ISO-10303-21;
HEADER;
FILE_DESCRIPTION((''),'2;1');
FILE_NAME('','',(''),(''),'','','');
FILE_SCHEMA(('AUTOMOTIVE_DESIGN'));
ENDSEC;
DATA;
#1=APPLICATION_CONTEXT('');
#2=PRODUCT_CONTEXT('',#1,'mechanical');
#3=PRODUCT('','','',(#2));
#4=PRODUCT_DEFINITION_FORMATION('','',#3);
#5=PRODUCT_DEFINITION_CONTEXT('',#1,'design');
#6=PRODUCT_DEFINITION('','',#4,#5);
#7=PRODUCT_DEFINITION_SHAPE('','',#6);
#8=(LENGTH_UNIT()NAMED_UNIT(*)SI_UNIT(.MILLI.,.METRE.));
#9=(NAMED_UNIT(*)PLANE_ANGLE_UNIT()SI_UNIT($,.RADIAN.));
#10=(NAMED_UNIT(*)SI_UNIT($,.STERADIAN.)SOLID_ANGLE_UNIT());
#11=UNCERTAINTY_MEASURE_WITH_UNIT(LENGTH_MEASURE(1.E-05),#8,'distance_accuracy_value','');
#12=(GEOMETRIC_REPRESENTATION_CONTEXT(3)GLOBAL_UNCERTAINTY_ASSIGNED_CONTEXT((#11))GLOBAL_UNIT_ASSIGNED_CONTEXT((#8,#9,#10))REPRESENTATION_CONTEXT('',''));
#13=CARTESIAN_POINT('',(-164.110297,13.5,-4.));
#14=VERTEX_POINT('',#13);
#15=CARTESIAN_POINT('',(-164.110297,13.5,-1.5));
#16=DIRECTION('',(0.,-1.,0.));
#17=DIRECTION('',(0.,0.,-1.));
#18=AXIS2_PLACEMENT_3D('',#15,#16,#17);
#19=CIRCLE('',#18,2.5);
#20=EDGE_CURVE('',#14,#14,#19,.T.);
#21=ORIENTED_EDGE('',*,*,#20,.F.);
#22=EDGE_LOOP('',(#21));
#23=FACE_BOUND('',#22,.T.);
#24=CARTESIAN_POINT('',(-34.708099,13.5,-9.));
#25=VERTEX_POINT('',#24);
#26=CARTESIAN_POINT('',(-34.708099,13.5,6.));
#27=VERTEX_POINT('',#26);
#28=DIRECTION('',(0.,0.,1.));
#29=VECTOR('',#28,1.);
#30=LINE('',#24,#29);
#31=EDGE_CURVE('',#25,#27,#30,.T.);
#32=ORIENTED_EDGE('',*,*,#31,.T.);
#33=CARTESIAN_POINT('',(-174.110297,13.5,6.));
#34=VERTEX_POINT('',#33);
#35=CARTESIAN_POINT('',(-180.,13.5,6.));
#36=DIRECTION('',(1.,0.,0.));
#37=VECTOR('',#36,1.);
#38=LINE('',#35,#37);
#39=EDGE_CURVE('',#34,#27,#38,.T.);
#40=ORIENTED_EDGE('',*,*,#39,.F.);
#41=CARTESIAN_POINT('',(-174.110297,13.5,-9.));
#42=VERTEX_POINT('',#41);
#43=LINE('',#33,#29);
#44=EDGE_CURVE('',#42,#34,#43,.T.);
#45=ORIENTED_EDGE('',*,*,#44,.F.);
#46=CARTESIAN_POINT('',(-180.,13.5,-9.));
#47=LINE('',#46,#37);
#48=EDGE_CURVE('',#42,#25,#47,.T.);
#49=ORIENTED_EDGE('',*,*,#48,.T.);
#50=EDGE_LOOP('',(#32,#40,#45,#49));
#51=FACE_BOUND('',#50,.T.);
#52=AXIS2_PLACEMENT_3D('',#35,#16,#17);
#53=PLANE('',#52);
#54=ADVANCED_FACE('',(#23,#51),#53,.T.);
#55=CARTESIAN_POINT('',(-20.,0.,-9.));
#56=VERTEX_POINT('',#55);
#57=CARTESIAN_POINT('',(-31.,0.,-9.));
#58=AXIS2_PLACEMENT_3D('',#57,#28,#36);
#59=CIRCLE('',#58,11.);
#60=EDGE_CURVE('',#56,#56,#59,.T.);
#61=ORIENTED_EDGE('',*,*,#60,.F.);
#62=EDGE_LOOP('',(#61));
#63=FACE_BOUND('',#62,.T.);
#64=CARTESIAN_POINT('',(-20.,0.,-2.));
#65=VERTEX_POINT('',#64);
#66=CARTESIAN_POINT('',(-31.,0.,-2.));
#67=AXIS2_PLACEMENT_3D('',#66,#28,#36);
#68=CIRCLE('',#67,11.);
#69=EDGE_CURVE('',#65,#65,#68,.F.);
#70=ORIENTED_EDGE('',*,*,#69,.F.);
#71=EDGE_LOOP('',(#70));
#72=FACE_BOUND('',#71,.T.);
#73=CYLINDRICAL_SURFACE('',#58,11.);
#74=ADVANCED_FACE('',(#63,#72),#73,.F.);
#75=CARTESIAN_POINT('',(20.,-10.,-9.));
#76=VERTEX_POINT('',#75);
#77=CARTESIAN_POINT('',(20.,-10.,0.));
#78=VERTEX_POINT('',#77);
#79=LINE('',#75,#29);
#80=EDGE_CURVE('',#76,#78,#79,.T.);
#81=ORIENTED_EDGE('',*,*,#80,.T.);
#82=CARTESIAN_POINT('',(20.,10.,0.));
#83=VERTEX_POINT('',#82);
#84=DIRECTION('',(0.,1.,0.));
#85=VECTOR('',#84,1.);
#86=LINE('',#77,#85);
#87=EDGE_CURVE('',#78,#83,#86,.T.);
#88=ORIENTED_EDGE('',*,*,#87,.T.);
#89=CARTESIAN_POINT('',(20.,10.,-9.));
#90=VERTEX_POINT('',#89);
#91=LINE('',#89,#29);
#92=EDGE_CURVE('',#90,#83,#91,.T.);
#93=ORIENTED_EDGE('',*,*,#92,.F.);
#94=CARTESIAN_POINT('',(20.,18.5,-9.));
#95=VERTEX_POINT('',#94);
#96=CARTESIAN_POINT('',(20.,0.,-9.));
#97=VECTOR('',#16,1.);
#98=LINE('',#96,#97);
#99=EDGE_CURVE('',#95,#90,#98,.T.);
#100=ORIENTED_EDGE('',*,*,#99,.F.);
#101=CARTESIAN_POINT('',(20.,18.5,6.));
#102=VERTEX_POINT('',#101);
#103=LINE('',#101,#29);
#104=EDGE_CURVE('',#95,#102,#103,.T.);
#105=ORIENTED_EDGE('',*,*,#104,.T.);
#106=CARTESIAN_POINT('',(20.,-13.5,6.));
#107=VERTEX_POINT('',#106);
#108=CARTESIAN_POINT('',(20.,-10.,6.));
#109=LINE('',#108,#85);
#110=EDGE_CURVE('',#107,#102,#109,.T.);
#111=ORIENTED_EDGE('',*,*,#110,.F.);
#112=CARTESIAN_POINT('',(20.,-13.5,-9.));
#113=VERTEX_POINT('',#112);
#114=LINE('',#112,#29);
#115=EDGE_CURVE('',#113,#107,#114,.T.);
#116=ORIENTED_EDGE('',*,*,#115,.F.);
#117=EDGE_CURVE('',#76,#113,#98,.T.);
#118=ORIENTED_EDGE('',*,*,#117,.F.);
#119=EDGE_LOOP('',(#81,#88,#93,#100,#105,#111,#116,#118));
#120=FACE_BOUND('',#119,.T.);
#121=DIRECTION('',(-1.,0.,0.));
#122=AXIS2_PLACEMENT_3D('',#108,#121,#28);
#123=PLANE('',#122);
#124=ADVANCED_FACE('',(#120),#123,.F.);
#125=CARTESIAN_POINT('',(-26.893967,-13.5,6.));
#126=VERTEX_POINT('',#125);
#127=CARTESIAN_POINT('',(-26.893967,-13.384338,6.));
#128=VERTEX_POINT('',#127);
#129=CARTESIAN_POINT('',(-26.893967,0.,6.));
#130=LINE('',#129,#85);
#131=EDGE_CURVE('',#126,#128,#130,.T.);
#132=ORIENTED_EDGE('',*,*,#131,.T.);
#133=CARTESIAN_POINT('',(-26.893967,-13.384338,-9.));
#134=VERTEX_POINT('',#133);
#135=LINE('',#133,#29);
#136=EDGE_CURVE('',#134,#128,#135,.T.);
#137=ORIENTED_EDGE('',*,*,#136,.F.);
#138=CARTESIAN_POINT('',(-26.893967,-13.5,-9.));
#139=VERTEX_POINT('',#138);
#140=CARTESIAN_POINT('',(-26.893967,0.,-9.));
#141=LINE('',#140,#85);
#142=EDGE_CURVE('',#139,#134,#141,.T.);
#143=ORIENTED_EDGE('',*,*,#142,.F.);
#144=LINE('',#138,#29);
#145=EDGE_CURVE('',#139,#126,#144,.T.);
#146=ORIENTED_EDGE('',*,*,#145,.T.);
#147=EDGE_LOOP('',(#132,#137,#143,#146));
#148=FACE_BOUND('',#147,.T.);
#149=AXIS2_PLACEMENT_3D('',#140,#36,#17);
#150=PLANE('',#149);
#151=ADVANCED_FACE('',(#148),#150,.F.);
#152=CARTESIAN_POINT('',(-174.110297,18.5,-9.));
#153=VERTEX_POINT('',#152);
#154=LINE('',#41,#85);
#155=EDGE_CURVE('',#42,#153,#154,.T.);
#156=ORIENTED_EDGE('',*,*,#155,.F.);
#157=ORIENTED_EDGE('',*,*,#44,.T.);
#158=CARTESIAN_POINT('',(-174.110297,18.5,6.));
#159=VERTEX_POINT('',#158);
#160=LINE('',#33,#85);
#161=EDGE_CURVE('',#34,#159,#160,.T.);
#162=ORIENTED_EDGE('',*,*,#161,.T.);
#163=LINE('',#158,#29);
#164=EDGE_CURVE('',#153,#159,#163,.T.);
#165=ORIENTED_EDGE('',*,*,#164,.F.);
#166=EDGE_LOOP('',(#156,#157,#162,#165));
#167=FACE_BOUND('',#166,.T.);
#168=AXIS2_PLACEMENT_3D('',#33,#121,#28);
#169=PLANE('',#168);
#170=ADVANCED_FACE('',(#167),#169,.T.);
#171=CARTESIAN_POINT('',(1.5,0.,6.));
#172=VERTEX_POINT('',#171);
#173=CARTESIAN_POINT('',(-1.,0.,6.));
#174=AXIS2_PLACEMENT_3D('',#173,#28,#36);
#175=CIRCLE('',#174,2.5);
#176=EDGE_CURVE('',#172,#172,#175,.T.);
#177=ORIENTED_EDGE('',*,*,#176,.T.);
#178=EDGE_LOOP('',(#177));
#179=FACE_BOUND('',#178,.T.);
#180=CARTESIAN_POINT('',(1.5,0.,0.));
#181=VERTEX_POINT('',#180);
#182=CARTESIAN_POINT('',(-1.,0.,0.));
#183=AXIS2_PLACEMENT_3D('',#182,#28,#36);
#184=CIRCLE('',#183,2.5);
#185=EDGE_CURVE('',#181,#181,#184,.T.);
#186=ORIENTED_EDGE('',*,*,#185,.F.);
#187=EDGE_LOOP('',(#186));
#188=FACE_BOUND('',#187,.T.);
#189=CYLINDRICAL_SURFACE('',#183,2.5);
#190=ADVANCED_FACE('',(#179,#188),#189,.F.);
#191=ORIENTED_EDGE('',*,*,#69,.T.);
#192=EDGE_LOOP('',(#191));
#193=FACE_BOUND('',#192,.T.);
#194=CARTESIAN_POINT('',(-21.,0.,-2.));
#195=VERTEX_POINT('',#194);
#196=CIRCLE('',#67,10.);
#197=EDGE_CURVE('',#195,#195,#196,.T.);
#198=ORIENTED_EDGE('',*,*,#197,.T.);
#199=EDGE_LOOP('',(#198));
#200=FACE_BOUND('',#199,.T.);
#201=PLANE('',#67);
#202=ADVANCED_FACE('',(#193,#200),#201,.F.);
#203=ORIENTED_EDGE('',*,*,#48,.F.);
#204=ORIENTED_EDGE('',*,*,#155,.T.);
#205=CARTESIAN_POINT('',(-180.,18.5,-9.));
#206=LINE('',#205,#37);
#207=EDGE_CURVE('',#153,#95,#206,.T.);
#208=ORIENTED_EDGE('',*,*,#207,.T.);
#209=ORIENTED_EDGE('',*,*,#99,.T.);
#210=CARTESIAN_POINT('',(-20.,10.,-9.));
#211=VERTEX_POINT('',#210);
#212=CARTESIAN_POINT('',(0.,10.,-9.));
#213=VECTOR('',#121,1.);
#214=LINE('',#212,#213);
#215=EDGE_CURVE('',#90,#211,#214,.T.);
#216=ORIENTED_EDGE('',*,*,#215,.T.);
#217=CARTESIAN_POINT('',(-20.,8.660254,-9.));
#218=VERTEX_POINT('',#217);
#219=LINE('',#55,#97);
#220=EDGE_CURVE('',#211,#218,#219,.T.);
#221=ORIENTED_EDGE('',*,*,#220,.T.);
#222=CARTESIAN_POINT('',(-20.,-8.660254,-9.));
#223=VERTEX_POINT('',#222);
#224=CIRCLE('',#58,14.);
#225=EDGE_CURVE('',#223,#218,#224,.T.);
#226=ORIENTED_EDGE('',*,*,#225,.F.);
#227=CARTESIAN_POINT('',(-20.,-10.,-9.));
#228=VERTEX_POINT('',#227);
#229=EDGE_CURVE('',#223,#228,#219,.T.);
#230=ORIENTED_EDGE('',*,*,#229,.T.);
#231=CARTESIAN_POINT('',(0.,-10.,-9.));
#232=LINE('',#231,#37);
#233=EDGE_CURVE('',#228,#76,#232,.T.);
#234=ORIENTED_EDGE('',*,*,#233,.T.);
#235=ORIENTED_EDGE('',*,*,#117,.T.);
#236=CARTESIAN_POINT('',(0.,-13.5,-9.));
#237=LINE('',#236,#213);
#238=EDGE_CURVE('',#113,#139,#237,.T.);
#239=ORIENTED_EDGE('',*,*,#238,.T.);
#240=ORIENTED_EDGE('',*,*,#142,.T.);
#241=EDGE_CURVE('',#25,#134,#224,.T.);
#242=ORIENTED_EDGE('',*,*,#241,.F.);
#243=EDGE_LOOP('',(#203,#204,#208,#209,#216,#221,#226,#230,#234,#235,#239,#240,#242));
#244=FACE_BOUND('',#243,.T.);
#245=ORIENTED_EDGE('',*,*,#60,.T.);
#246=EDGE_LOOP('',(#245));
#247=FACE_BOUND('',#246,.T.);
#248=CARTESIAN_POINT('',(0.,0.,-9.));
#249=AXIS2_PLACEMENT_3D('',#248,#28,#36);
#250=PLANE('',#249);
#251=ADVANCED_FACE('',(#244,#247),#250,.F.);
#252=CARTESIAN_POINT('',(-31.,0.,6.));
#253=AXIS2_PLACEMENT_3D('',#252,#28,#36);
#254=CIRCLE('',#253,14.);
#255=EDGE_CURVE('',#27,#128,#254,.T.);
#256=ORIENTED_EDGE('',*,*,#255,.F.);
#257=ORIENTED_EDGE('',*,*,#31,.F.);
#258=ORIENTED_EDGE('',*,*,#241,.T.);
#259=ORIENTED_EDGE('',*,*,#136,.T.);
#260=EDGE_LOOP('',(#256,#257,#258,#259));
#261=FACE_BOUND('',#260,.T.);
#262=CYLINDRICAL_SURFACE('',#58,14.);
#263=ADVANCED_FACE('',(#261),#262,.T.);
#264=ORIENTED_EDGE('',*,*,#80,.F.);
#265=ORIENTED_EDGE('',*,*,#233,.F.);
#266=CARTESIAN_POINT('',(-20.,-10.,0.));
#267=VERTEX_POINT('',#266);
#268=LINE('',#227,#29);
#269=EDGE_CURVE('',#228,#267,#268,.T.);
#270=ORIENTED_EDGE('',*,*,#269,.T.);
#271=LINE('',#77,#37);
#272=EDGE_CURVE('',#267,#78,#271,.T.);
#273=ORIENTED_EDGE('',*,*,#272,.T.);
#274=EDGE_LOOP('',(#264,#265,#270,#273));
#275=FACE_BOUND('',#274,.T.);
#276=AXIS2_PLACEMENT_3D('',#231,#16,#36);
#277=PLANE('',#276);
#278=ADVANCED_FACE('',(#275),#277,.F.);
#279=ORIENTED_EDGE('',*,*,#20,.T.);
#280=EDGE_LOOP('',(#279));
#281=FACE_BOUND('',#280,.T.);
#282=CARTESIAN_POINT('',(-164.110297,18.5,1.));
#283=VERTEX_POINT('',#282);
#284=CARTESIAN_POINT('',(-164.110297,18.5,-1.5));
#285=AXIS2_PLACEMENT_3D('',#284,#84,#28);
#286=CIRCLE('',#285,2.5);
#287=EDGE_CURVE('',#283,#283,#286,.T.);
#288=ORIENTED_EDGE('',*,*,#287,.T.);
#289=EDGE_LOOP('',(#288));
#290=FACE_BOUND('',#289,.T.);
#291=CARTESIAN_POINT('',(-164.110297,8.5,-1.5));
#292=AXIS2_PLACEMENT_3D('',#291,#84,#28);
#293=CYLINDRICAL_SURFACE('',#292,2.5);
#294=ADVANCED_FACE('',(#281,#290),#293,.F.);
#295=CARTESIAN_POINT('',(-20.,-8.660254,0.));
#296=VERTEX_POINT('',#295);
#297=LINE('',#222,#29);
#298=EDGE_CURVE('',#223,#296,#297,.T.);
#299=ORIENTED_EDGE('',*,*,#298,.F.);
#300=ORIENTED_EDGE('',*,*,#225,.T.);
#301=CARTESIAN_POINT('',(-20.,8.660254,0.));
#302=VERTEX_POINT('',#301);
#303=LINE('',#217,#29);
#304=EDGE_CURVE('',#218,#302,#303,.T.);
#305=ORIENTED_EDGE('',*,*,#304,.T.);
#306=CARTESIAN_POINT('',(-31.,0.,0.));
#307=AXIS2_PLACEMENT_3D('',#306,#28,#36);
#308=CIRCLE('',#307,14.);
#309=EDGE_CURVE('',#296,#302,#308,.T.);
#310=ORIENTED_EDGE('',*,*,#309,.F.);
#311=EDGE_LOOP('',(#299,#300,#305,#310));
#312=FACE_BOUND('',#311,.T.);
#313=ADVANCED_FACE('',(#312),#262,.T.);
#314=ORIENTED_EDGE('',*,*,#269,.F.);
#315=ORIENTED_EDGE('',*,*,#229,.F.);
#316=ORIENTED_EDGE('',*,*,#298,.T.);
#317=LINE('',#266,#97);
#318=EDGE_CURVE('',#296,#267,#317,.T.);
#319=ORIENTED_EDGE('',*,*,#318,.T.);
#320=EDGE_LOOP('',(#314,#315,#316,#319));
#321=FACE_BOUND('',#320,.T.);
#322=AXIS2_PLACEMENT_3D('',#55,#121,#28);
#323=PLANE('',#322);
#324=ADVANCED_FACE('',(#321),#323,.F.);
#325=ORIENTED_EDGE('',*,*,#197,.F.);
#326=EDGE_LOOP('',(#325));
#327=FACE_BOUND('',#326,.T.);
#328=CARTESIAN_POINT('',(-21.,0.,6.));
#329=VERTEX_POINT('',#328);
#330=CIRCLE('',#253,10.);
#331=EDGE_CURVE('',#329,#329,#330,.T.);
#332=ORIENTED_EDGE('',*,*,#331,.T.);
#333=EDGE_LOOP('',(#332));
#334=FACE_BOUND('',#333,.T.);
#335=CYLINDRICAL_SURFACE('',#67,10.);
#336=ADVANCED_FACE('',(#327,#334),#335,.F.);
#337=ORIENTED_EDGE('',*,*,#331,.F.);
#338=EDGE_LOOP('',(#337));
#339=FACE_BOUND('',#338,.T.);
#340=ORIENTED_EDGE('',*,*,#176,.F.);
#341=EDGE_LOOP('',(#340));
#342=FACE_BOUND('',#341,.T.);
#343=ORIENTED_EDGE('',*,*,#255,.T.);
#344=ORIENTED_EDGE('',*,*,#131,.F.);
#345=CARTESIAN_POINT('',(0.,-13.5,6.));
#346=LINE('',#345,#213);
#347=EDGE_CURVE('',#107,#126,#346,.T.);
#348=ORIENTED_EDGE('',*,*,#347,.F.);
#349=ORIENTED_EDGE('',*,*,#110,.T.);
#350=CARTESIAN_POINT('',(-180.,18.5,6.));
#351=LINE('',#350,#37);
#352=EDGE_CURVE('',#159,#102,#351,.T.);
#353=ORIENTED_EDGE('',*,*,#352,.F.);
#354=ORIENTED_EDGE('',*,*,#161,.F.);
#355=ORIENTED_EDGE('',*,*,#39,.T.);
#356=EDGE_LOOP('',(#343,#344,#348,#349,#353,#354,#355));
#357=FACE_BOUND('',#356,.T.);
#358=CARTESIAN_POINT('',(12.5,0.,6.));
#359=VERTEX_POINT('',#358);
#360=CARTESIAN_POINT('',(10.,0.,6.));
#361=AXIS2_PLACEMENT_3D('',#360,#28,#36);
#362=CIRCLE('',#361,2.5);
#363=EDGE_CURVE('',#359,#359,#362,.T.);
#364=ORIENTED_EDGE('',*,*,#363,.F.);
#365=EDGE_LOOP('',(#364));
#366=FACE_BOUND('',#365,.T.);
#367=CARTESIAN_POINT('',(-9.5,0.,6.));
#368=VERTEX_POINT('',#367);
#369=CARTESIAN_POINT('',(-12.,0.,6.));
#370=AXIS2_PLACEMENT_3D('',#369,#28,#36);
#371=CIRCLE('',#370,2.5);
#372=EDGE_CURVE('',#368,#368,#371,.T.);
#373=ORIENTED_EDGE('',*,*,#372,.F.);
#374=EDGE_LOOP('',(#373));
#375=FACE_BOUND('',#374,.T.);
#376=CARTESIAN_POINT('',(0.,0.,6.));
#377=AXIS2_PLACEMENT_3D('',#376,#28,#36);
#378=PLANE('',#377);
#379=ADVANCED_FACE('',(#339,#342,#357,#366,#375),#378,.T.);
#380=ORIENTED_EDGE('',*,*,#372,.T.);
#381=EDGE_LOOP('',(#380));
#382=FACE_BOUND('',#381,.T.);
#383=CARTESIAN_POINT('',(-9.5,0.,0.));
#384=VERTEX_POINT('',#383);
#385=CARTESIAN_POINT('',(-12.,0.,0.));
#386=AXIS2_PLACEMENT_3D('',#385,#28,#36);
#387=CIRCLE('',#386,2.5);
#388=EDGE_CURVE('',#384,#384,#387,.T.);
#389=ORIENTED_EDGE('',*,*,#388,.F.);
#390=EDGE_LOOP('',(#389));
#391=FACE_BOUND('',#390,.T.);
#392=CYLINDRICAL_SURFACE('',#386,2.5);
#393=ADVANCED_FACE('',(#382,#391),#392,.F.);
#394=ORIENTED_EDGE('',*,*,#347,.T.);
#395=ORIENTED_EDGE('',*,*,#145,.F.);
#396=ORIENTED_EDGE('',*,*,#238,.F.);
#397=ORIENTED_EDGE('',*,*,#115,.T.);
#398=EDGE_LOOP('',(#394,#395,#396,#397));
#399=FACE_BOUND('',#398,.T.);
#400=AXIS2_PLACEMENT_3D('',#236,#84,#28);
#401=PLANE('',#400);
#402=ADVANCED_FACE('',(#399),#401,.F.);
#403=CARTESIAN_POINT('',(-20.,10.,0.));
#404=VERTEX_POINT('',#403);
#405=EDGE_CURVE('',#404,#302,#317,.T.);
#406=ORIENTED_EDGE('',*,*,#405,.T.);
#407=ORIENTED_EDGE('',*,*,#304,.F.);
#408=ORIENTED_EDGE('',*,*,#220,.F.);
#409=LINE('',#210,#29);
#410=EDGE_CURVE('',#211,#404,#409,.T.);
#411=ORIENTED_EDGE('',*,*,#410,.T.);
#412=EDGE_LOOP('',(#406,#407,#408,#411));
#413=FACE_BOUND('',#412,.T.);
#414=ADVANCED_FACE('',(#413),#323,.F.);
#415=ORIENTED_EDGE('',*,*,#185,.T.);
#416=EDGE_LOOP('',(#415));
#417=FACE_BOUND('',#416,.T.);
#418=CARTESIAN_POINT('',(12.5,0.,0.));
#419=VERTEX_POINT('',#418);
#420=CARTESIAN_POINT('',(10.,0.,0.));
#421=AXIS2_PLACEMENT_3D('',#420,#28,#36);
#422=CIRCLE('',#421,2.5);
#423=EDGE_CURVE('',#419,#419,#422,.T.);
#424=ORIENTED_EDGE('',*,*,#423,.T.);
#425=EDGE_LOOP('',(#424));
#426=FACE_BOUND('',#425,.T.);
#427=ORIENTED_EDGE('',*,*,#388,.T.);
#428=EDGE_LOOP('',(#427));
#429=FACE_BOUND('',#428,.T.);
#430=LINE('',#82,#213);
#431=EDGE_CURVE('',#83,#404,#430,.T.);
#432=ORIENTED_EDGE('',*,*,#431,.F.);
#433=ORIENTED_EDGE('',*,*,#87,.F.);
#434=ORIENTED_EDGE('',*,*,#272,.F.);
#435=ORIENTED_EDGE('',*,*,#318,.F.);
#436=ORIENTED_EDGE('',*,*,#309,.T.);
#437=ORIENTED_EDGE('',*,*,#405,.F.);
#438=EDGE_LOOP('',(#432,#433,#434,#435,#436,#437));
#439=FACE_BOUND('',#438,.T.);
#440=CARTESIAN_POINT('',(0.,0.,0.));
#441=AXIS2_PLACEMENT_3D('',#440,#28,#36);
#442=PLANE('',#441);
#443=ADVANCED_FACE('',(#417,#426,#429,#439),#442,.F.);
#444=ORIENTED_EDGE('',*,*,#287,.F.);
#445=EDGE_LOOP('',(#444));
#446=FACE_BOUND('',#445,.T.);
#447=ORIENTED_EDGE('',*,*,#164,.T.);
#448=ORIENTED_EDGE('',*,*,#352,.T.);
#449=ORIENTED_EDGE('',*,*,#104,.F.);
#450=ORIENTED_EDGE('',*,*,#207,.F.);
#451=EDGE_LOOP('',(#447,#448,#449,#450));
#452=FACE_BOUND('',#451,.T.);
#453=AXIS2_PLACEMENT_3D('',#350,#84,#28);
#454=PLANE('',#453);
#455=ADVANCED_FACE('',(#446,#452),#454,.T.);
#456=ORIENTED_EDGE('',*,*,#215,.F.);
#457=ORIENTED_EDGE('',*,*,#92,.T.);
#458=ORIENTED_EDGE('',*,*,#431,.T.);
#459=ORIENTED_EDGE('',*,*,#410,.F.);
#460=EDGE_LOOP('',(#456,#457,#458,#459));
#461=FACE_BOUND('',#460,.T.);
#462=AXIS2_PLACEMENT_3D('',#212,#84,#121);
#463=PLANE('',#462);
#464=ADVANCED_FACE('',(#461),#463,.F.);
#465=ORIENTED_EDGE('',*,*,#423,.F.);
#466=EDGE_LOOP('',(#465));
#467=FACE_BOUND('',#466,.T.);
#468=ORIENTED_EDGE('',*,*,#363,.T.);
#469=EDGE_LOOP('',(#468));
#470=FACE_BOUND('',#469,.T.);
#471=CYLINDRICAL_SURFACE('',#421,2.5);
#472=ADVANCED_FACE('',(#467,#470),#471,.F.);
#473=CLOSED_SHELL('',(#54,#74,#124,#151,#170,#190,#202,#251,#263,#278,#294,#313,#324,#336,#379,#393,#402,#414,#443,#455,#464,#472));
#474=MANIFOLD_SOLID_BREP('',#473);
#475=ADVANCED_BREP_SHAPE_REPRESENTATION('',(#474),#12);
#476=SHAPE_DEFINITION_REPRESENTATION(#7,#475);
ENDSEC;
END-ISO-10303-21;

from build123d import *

# Parameters (mm, degrees)
SKETCH_1_W          = 40
SKETCH_1_H          = 20
EXTRUDE_1_DEPTH     = 6
SKETCH_2_R          = 2.5
CUT_EXTRUDE_1_DEPTH = 24.151673806
EXTRUDE_START       = -15
EXTRUDE_2_OUTLINE_R = 11
EXTRUDE_2_DEPTH     = 15
EXTRUDE_START_2     = -8
SKETCH_5_R          = 11
SKETCH_5_R_2        = 10
EXTRUDE_3_DEPTH     = 8
SKETCH_8_W          = 15
SKETCH_8_H          = 5
EXTRUDE_4_DEPTH     = 200
SKETCH_9_W          = 4.403653586
SKETCH_9_H          = 3.736433346
EXTRUDE_5_DEPTH     = 15
SKETCH_13_W         = 64.67728996
SKETCH_13_H         = 18.524474632
CUT_EXTRUDE_2_DEPTH = 184.131783151
SKETCH_15_W         = 55.676477601
SKETCH_15_H         = 15
EXTRUDE_6_DEPTH     = 5
SKETCH_16_R         = 2.5
CUT_EXTRUDE_3_DEPTH = 10


# Read off the part's stored shape, not the designer's step: 凸台-拉伸2
with BuildPart() as part:
    # 草图1 → 凸台-拉伸1 (new body)
    with BuildSketch(Plane.XY):
        Rectangle(SKETCH_1_W, SKETCH_1_H)
    extrude(amount=EXTRUDE_1_DEPTH)

    # 草图2 → 切除-拉伸1 (cut, through all)
    with BuildSketch(Plane.XY.offset(6)):
        with Locations((10, 0)):
            Circle(SKETCH_2_R)
        with Locations((-1, 0)):
            Circle(SKETCH_2_R)
        with Locations((-12, 0)):
            Circle(SKETCH_2_R)
    extrude(amount=-CUT_EXTRUDE_1_DEPTH, mode=Mode.SUBTRACT)

    # 凸台-拉伸2 outline → 凸台-拉伸2 (add)
    with BuildSketch(Plane.XY.offset(6).offset(EXTRUDE_START)):
        with BuildLine():
            Line((20, 10), (20, 13.5))
            Line((20, 13.5), (-26.893967141, 13.5))
            Line((-26.893967141, 13.5), (-26.893967141, 13.384337644))
            ThreePointArc((-26.893967141, 13.384337644), (-45, 0), (-26.893967141, -13.384337644))
            Line((-26.893967141, -13.384337644), (-26.893967141, -13.5))
            Line((-26.893967141, -13.5), (20, -13.5))
            Line((20, -13.5), (20, -10))
            Line((20, -10), (-20, -10))
            Line((-20, -10), (-20, -8.660254038))
            ThreePointArc((-20, -8.660254038), (-17, 0), (-20, 8.660254038))
            Line((-20, 8.660254038), (-20, 10))
            Line((-20, 10), (20, 10))
        make_face()
        with Locations((-31, 0)):
            Circle(EXTRUDE_2_OUTLINE_R, mode=Mode.SUBTRACT)
    extrude(amount=EXTRUDE_2_DEPTH)

    # 草图5 → 凸台-拉伸3 (add)
    with BuildSketch(Plane.XY.offset(6).offset(EXTRUDE_START_2)):
        with Locations((-31, 0)):
            Circle(SKETCH_5_R)
        with Locations((-31, 0)):
            Circle(SKETCH_5_R_2, mode=Mode.SUBTRACT)
    extrude(amount=EXTRUDE_3_DEPTH)

    # 草图8 → 凸台-拉伸4 (add)
    with BuildSketch(Plane(origin=(20, 0, 0), x_dir=(0, 0, -1), z_dir=(1, 0, 0))):
        with Locations((1.5, 16)):
            Rectangle(SKETCH_8_W, SKETCH_8_H)
    extrude(amount=-EXTRUDE_4_DEPTH)

    # 草图9 → 凸台-拉伸5 (add, through all)
    with BuildSketch(Plane.XY.offset(6)):
        with Locations((-27.364497847, 13.796597935)):
            Rectangle(SKETCH_9_W, SKETCH_9_H)
    extrude(amount=-EXTRUDE_5_DEPTH)

    # 草图13 → 切除-拉伸2 (cut, through all)
    with BuildSketch(Plane(origin=(0, 18.5, 0), x_dir=(1, 0, 0), z_dir=(0, 1, 0))):
        with Locations((-150.772464122, 3.262237316)):
            Rectangle(SKETCH_13_W, SKETCH_13_H)
    extrude(amount=-CUT_EXTRUDE_2_DEPTH, mode=Mode.SUBTRACT)

    # 草图15 → 凸台-拉伸6 (add)
    with BuildSketch(Plane(origin=(0, 18.5, 0), x_dir=(1, 0, 0), z_dir=(0, 1, 0))):
        with Locations((-146.272057942, 1.5)):
            Rectangle(SKETCH_15_W, SKETCH_15_H)
    extrude(amount=-EXTRUDE_6_DEPTH)

    # 草图16 → 切除-拉伸3 (cut)
    with BuildSketch(Plane(origin=(0, 18.5, 0), x_dir=(1, 0, 0), z_dir=(0, 1, 0))):
        with Locations(Location((-164.110296743, 1.5, 0), (0, 0, 270))):
            Circle(SKETCH_16_R)
    extrude(amount=-CUT_EXTRUDE_3_DEPTH, mode=Mode.SUBTRACT)


solid = part.part
